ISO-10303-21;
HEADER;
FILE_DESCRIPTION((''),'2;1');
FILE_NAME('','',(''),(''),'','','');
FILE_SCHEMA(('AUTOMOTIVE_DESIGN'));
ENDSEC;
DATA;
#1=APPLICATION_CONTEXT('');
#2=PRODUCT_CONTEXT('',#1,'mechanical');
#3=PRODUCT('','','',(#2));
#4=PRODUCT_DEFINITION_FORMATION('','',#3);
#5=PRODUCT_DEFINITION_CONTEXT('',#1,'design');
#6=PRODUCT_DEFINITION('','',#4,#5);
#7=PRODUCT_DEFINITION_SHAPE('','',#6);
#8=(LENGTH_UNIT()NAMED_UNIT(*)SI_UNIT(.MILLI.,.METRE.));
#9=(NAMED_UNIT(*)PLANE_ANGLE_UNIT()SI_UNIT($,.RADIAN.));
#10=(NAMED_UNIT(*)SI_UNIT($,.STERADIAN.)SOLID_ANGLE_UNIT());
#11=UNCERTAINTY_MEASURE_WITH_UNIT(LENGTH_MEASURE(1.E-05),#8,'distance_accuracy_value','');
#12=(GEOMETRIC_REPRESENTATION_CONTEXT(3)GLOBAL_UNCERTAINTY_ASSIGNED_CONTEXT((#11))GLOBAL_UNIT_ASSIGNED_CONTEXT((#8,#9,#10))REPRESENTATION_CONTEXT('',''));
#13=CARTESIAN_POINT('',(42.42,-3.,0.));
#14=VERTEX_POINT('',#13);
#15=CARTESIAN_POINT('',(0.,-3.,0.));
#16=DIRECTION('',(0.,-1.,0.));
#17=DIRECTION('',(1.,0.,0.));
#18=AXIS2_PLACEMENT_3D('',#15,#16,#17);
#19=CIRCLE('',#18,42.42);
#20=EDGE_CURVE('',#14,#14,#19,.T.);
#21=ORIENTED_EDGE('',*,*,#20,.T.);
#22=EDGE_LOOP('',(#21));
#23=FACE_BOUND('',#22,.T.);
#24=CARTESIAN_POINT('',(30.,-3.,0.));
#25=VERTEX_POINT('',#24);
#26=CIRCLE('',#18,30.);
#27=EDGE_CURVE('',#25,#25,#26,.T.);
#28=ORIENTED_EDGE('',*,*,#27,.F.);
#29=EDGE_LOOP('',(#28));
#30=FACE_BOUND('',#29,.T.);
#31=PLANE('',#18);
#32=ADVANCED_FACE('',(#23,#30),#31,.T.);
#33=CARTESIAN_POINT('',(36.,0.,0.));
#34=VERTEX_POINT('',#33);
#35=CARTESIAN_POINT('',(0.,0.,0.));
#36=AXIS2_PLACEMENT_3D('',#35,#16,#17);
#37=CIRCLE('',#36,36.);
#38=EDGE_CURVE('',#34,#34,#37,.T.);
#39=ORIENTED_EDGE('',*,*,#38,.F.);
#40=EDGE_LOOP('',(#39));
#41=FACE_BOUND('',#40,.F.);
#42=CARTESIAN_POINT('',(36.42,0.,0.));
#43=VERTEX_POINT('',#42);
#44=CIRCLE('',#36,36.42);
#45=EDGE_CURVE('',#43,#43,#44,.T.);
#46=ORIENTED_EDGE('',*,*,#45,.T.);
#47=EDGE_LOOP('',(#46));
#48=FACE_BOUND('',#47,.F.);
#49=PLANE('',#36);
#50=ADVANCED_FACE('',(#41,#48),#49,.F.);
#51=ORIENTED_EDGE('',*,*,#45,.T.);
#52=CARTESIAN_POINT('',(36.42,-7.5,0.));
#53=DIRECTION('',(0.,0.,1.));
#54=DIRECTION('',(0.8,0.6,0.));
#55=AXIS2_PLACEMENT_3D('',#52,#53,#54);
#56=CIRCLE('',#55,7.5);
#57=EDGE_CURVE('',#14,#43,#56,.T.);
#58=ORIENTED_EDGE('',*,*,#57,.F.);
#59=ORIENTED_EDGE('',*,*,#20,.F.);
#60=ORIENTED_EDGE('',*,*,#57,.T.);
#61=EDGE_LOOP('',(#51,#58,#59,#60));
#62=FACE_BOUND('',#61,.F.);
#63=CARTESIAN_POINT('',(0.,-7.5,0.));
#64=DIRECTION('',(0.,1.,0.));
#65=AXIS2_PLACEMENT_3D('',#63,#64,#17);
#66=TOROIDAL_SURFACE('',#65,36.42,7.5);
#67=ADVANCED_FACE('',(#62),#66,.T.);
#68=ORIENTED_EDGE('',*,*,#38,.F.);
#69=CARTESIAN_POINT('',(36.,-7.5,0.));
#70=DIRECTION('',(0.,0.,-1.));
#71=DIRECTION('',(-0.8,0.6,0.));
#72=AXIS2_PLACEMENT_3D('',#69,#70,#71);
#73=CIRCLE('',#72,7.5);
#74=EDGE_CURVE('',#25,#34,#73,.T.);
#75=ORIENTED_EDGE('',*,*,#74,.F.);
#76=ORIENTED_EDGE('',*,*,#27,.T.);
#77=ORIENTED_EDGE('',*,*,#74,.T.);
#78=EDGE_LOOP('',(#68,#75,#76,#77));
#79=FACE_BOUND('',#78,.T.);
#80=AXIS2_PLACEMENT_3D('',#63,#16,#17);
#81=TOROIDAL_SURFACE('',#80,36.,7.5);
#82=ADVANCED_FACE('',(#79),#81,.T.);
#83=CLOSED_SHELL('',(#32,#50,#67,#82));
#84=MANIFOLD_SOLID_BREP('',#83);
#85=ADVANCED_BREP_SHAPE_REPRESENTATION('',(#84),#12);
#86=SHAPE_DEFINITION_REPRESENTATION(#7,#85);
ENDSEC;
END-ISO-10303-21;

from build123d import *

# Parameters (mm, degrees)
F0_R     = 42.42
F0_R_2   = 30
F1_DEPTH = 3


# Not quite as in the source:
# - a fillet or chamfer that OpenCascade refuses, or shapes differently, is made with other operations: its cross-section is extruded or revolved along the edge and cut away or added


with BuildPart() as f1:
    # F0 (on Front) → F1 (new body)
    with BuildSketch(Plane.XZ):
        Circle(F0_R)
        Circle(F0_R_2, mode=Mode.SUBTRACT)
    extrude(amount=F1_DEPTH)

    # F2: fillet of radius 7.5 on 2 edges, made by hand

    # F2_s1 → F2_t2 (revolve, cut)
    with BuildSketch(Plane.XY):
        with BuildLine():
            ThreePointArc((30, -3), (32.6458980338, -0.7917960675), (36, 0))
            Line((36, 0), (30, 0))
            Line((30, 0), (30, -3))
        make_face()
    revolve(axis=Axis((0, 0, 0), (0, -1, 0)), mode=Mode.SUBTRACT)

    # F2_s3 → F2_t4 (revolve, cut)
    with BuildSketch(Plane.XY):
        with BuildLine():
            ThreePointArc((42.42, -3), (39.7741019662, -0.7917960675), (36.42, 0))
            Line((36.42, 0), (42.42, 0))
            Line((42.42, 0), (42.42, -3))
        make_face()
    revolve(axis=Axis((0, 0, 0), (0, -1, 0)), mode=Mode.SUBTRACT)


solid = f1.part
